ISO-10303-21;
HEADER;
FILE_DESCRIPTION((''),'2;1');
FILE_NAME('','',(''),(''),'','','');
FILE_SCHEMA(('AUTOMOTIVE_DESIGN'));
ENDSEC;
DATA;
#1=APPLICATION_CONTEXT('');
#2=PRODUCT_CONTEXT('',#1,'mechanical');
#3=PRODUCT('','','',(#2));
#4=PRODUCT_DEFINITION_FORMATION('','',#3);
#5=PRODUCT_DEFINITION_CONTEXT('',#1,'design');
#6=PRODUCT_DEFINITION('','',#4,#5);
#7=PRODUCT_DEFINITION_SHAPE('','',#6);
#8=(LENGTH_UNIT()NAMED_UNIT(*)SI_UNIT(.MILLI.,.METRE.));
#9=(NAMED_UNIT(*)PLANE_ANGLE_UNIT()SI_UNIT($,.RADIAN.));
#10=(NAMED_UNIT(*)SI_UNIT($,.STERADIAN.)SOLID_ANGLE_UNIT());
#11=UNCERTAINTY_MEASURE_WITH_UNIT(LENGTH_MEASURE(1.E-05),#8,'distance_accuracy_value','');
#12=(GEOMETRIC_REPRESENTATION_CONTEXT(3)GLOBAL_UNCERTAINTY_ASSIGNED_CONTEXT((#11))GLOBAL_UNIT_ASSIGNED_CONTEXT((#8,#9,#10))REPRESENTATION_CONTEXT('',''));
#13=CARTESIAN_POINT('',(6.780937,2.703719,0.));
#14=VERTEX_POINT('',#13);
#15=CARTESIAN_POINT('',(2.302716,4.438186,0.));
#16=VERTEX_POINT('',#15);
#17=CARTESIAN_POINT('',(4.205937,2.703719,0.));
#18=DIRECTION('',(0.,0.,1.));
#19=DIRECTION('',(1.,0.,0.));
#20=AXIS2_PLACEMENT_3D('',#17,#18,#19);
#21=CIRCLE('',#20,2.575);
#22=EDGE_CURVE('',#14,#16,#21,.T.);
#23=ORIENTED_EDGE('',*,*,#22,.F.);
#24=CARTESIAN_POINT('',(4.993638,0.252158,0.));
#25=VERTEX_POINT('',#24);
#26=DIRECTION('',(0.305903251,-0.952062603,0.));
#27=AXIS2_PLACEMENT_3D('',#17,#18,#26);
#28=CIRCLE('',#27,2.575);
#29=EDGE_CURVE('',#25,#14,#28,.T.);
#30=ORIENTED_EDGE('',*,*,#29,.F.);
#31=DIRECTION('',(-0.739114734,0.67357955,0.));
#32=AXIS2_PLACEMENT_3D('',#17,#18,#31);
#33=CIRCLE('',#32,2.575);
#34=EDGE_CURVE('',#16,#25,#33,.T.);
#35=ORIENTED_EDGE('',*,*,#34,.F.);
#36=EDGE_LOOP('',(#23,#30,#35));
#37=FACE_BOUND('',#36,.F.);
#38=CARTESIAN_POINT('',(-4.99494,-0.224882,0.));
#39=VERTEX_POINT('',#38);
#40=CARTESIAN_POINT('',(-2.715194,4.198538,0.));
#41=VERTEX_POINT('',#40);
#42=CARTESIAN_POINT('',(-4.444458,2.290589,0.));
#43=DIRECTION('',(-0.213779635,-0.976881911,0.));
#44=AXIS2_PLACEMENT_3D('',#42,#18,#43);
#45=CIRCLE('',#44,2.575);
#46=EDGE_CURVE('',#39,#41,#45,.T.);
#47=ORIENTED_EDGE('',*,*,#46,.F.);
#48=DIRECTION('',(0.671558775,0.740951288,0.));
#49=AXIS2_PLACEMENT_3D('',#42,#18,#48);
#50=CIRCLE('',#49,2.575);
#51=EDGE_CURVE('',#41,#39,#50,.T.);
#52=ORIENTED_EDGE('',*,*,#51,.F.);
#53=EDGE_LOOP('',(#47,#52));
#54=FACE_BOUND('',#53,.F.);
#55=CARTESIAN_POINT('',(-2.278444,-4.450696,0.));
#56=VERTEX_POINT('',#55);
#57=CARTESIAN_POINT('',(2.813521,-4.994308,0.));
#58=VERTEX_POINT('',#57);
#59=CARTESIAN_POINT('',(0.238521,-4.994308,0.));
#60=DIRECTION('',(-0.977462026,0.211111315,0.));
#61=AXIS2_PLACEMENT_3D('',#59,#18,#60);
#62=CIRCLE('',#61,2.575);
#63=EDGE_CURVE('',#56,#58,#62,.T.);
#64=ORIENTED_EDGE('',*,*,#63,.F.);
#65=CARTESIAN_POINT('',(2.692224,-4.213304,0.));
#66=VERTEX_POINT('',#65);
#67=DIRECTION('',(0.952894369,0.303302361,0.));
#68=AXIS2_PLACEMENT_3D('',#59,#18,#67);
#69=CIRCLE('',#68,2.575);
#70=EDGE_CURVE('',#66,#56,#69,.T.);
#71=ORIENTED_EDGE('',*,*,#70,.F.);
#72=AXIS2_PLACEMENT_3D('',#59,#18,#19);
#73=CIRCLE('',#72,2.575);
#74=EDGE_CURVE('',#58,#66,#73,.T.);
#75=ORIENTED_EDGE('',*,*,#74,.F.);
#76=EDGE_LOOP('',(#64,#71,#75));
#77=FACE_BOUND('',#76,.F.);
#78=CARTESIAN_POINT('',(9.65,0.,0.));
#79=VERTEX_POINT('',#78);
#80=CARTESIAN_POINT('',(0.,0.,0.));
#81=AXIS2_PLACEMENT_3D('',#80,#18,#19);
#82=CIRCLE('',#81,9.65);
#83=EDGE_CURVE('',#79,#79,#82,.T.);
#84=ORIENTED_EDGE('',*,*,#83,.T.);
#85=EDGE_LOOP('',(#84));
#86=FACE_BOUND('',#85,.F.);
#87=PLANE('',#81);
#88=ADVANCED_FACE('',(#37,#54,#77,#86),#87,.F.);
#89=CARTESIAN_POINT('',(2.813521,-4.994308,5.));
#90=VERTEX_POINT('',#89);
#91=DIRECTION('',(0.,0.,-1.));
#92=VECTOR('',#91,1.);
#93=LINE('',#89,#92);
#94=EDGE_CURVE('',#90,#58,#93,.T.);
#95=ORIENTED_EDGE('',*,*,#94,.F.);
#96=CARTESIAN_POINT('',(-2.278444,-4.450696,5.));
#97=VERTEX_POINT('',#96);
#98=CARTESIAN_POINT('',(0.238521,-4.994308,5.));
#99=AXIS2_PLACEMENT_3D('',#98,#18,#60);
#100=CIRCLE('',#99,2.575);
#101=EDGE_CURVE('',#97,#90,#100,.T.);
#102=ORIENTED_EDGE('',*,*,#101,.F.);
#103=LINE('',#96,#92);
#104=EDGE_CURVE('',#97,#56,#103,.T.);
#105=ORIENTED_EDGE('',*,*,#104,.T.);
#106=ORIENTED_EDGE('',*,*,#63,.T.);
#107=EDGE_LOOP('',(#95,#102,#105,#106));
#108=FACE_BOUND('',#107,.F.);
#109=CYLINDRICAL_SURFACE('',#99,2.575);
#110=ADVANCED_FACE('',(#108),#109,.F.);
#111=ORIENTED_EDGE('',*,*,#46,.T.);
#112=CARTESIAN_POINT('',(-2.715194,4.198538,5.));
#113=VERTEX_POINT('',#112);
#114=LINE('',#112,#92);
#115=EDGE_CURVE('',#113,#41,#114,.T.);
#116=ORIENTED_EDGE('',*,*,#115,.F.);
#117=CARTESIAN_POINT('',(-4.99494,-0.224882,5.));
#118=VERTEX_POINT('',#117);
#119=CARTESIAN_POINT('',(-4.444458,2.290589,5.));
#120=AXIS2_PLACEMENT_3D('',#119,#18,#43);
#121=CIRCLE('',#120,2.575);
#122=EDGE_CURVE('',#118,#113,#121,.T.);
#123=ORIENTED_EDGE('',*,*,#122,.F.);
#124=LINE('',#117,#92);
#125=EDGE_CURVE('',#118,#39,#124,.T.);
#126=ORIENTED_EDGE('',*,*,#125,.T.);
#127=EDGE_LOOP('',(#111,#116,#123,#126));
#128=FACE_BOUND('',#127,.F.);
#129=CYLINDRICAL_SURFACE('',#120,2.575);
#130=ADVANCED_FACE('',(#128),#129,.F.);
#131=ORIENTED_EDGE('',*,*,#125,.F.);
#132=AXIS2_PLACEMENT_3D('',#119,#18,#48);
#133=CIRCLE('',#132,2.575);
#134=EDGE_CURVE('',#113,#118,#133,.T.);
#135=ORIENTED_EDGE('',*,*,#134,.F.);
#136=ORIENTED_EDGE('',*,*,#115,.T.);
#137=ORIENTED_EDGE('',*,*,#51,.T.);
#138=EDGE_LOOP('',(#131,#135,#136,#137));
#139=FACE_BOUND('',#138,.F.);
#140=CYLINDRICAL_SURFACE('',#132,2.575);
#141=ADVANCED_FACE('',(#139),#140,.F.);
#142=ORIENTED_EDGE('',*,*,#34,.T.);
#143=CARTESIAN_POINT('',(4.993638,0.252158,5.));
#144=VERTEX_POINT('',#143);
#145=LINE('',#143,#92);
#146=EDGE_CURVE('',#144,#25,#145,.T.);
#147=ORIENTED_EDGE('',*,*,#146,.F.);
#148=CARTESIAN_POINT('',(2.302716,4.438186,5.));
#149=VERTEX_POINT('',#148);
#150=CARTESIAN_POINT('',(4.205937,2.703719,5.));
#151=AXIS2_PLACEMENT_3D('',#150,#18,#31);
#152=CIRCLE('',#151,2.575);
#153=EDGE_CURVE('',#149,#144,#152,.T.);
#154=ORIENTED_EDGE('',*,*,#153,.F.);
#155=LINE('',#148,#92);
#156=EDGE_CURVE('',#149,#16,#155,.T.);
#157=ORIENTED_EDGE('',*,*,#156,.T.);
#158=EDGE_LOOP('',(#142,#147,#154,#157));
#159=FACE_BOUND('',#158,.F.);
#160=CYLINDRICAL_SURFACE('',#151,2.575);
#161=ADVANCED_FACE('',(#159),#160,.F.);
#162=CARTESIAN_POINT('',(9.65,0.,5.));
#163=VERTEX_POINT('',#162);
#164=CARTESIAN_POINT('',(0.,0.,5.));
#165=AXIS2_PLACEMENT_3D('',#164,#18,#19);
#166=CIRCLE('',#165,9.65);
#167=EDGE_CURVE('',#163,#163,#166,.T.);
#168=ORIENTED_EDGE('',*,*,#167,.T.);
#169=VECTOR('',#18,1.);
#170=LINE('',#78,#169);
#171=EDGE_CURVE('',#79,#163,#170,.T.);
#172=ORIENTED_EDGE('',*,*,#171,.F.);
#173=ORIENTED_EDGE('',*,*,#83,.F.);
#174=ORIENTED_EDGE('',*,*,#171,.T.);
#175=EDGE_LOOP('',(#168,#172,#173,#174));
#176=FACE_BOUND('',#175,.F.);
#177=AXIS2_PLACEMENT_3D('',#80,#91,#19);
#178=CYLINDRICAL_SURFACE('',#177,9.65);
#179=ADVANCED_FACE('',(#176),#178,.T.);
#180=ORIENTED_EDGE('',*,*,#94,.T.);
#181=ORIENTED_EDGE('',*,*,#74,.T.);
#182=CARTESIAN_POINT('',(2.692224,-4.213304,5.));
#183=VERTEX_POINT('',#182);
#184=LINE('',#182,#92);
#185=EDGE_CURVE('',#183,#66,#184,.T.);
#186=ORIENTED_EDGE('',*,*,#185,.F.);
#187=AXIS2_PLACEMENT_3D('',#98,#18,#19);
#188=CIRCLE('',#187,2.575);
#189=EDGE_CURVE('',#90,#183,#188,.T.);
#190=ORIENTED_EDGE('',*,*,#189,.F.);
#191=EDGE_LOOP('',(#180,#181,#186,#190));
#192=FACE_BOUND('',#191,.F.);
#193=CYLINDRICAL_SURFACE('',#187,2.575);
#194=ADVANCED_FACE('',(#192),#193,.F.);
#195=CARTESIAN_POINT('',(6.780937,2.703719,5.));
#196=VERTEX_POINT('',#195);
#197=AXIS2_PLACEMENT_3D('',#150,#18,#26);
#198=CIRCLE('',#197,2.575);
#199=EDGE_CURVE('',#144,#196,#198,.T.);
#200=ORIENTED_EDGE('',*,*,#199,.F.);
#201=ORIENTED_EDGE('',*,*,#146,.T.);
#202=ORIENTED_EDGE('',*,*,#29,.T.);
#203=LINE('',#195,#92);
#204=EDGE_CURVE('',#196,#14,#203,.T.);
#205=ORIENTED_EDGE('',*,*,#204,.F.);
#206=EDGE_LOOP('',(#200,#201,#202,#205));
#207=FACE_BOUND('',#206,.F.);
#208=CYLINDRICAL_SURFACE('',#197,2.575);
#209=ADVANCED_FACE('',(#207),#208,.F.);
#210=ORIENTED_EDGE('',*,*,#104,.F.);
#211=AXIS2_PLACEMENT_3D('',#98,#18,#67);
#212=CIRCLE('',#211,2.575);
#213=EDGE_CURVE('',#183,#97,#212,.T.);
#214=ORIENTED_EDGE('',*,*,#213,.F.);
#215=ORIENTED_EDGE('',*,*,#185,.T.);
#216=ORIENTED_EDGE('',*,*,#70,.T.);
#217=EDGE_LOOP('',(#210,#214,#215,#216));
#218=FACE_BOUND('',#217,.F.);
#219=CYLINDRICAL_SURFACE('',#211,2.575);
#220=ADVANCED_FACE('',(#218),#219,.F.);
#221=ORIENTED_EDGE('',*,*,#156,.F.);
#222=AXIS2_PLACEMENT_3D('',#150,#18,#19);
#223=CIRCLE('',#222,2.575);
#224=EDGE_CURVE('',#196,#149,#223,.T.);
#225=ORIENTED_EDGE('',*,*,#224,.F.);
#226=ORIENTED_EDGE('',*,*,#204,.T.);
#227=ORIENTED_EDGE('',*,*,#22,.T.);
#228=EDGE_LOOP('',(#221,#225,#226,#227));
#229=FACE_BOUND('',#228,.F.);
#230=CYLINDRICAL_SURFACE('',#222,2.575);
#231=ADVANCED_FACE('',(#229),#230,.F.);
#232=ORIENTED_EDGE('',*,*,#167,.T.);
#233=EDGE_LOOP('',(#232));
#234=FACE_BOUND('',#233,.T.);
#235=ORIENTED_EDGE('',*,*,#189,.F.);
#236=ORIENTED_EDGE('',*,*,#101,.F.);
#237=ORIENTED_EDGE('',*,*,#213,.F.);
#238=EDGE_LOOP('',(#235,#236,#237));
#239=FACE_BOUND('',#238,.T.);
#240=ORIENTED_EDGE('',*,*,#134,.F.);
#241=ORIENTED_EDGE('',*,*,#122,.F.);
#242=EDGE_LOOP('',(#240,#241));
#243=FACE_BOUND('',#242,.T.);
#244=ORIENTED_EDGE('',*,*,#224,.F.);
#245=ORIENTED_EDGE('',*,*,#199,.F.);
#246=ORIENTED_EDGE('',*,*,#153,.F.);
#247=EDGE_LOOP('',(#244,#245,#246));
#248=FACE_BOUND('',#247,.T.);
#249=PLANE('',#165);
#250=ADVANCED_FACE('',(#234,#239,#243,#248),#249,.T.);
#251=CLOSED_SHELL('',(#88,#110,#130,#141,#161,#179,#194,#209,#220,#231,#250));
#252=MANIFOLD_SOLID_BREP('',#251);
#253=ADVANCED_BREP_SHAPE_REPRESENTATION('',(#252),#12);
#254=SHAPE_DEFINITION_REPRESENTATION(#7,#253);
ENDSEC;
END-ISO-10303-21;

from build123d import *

# Parameters (mm, degrees)
F0_R     = 9.65
F1_DEPTH = 5
F3_DEPTH = 5.001


with BuildPart() as f1:
    # F0 (on Top) → F1 (new body)
    with BuildSketch(Plane.XY):
        Circle(F0_R)
    extrude(amount=F1_DEPTH)

    # F2 (on face) → F3 (cut, through all)
    with BuildSketch(Plane.XY.offset(5)):
        with BuildLine():
            ThreePointArc((2.3027162866, 4.4381863079), (2.0398793124, 1.311303699), (4.9936375982, 0.252157763))
            ThreePointArc((4.9936375982, 0.252157763), (4.2059367266, 2.7037189669), (2.3027162866, 4.4381863079))
        make_face()
        with BuildLine():
            ThreePointArc((2.3027162866, 4.4381863079), (4.2059367266, 2.7037189669), (4.9936375982, 0.252157763))
            ThreePointArc((4.9936375982, 0.252157763), (6.286676348, 1.1867655636), (6.7809367266, 2.7037189669))
            ThreePointArc((6.7809367266, 2.7037189669), (5.1359454274, 5.1049080091), (2.3027162866, 4.4381863079))
        make_face()
        with BuildLine():
            ThreePointArc((2.8135209468, -4.9943075354), (2.783016007, -4.5991241749), (2.692223946, -4.2133039558))
            ThreePointArc((2.692223946, -4.2133039558), (0.2385209468, -4.9943075354), (-2.2784437706, -4.4506958988))
            ThreePointArc((-2.2784437706, -4.4506958988), (-0.0348294261, -7.5547576079), (2.8135209468, -4.9943075354))
        make_face()
        with BuildLine():
            ThreePointArc((-2.2784437706, -4.4506958988), (0.2385209468, -4.9943075354), (2.692223946, -4.2133039558))
            ThreePointArc((2.692223946, -4.2133039558), (0.1156826592, -2.4222391547), (-2.2784437706, -4.4506958988))
        make_face()
        with BuildLine():
            ThreePointArc((-1.8694576733, 2.2905885685), (-2.090367679, 3.3340852377), (-2.7151938276, 4.1985381359))
            ThreePointArc((-2.7151938276, 4.1985381359), (-4.4444576733, 2.2905885685), (-4.9949402326, -0.224882352))
            ThreePointArc((-4.9949402326, -0.224882352), (-2.8299713139, 0.2845828867), (-1.8694576733, 2.2905885685))
        make_face()
        with BuildLine():
            ThreePointArc((-4.9949402326, -0.224882352), (-4.4444576733, 2.2905885685), (-2.7151938276, 4.1985381359))
            ThreePointArc((-2.7151938276, 4.1985381359), (-6.7333533751, 3.4702416812), (-4.9949402326, -0.224882352))
        make_face()
    extrude(amount=-F3_DEPTH, mode=Mode.SUBTRACT)


solid = f1.part
